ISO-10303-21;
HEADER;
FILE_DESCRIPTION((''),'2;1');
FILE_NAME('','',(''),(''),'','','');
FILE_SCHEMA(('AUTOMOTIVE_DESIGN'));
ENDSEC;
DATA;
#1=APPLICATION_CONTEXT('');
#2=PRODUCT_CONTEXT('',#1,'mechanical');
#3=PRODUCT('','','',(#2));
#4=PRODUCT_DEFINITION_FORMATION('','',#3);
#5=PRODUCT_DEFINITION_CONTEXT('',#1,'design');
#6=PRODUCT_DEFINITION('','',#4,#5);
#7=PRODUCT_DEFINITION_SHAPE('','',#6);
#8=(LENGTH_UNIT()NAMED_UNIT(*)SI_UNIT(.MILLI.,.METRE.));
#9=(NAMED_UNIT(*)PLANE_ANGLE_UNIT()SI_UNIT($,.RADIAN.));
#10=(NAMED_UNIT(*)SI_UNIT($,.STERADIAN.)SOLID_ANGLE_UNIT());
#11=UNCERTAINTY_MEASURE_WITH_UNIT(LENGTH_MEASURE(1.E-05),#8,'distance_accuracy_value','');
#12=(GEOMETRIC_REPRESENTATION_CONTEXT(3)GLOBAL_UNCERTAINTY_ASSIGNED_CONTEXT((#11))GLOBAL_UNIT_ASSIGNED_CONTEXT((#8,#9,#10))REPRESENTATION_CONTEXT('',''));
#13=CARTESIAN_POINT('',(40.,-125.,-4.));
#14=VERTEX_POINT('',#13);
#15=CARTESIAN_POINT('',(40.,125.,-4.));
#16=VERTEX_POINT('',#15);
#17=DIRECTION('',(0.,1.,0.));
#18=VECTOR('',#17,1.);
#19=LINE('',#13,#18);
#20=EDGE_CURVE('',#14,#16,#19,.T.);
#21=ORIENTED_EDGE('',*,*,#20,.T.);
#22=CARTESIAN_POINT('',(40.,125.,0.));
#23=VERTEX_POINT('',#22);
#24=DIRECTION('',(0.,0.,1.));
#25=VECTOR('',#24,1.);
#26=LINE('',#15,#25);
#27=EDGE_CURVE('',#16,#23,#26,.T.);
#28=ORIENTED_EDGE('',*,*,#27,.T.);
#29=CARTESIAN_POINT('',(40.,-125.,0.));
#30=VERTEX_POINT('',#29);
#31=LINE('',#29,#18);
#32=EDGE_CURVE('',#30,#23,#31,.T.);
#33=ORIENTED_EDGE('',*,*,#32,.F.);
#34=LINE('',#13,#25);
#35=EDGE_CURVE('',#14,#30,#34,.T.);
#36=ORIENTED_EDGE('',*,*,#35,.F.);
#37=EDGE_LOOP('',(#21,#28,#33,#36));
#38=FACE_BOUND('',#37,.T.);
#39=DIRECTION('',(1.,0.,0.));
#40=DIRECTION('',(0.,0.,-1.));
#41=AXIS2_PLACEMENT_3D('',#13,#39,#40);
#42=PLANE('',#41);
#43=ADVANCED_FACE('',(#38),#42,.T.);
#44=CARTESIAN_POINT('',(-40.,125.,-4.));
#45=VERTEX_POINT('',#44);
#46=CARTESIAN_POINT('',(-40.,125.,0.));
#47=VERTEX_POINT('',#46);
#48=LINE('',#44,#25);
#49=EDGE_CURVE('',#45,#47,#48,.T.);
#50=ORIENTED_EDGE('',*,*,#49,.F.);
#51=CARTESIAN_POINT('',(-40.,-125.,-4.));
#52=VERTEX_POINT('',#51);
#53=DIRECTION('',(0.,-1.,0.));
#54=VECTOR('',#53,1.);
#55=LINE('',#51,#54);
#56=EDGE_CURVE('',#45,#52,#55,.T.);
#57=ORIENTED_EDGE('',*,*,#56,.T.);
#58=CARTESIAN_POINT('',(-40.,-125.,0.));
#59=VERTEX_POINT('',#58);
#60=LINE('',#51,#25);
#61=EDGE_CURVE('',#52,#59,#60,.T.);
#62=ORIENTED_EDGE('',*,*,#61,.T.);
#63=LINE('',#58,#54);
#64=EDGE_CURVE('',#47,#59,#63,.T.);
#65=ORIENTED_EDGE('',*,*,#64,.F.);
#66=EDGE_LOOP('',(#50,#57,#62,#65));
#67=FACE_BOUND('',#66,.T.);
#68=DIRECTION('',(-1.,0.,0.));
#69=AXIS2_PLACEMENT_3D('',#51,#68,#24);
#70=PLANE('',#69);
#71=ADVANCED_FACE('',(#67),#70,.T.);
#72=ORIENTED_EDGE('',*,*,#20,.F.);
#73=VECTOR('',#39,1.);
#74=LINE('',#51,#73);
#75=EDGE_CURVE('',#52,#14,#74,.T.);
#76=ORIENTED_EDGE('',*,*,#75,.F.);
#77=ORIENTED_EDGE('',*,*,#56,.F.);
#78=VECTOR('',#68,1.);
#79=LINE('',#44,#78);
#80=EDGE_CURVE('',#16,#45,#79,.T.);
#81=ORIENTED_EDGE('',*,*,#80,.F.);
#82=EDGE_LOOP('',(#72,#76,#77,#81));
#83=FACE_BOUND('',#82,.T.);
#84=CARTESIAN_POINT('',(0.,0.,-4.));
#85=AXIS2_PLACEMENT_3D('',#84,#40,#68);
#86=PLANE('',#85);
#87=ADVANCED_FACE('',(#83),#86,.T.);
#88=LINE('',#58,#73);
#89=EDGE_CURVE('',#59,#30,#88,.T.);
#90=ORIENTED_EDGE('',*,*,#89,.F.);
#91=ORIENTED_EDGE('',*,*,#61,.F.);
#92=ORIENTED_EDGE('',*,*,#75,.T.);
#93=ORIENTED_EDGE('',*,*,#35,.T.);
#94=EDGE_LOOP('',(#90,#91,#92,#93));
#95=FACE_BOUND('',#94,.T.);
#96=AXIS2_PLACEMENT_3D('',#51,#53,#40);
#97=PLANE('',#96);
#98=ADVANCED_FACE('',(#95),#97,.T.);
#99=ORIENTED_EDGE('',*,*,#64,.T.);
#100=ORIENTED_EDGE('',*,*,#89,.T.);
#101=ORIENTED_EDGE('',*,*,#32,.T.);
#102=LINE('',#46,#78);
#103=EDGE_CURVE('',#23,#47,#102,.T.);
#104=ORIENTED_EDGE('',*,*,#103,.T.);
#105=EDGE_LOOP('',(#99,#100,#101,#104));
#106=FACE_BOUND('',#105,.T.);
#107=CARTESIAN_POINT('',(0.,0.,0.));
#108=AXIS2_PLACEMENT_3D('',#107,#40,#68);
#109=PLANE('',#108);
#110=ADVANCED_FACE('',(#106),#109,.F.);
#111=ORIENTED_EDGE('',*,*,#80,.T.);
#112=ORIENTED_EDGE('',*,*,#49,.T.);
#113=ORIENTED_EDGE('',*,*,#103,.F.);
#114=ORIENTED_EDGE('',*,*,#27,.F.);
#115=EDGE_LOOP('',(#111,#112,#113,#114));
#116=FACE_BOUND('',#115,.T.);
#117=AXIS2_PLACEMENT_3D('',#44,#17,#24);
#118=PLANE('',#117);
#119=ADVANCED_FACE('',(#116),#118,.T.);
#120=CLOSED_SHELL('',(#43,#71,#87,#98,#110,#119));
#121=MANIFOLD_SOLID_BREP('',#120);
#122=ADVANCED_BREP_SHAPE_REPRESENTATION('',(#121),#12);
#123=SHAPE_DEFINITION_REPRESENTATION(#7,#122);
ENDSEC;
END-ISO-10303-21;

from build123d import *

# Parameters (mm, degrees)
SKETCH1_W          = 80
SKETCH1_H          = 250
BASE_FLANGE1_DEPTH = 4


# Sheet-metal steps are written as plain solids
with BuildPart() as part:
    # Sketch1 → Base-Flange1 (new body)
    with BuildSketch(Plane.XY):
        Rectangle(SKETCH1_W, SKETCH1_H)
    extrude(amount=-BASE_FLANGE1_DEPTH)


solid = part.part
